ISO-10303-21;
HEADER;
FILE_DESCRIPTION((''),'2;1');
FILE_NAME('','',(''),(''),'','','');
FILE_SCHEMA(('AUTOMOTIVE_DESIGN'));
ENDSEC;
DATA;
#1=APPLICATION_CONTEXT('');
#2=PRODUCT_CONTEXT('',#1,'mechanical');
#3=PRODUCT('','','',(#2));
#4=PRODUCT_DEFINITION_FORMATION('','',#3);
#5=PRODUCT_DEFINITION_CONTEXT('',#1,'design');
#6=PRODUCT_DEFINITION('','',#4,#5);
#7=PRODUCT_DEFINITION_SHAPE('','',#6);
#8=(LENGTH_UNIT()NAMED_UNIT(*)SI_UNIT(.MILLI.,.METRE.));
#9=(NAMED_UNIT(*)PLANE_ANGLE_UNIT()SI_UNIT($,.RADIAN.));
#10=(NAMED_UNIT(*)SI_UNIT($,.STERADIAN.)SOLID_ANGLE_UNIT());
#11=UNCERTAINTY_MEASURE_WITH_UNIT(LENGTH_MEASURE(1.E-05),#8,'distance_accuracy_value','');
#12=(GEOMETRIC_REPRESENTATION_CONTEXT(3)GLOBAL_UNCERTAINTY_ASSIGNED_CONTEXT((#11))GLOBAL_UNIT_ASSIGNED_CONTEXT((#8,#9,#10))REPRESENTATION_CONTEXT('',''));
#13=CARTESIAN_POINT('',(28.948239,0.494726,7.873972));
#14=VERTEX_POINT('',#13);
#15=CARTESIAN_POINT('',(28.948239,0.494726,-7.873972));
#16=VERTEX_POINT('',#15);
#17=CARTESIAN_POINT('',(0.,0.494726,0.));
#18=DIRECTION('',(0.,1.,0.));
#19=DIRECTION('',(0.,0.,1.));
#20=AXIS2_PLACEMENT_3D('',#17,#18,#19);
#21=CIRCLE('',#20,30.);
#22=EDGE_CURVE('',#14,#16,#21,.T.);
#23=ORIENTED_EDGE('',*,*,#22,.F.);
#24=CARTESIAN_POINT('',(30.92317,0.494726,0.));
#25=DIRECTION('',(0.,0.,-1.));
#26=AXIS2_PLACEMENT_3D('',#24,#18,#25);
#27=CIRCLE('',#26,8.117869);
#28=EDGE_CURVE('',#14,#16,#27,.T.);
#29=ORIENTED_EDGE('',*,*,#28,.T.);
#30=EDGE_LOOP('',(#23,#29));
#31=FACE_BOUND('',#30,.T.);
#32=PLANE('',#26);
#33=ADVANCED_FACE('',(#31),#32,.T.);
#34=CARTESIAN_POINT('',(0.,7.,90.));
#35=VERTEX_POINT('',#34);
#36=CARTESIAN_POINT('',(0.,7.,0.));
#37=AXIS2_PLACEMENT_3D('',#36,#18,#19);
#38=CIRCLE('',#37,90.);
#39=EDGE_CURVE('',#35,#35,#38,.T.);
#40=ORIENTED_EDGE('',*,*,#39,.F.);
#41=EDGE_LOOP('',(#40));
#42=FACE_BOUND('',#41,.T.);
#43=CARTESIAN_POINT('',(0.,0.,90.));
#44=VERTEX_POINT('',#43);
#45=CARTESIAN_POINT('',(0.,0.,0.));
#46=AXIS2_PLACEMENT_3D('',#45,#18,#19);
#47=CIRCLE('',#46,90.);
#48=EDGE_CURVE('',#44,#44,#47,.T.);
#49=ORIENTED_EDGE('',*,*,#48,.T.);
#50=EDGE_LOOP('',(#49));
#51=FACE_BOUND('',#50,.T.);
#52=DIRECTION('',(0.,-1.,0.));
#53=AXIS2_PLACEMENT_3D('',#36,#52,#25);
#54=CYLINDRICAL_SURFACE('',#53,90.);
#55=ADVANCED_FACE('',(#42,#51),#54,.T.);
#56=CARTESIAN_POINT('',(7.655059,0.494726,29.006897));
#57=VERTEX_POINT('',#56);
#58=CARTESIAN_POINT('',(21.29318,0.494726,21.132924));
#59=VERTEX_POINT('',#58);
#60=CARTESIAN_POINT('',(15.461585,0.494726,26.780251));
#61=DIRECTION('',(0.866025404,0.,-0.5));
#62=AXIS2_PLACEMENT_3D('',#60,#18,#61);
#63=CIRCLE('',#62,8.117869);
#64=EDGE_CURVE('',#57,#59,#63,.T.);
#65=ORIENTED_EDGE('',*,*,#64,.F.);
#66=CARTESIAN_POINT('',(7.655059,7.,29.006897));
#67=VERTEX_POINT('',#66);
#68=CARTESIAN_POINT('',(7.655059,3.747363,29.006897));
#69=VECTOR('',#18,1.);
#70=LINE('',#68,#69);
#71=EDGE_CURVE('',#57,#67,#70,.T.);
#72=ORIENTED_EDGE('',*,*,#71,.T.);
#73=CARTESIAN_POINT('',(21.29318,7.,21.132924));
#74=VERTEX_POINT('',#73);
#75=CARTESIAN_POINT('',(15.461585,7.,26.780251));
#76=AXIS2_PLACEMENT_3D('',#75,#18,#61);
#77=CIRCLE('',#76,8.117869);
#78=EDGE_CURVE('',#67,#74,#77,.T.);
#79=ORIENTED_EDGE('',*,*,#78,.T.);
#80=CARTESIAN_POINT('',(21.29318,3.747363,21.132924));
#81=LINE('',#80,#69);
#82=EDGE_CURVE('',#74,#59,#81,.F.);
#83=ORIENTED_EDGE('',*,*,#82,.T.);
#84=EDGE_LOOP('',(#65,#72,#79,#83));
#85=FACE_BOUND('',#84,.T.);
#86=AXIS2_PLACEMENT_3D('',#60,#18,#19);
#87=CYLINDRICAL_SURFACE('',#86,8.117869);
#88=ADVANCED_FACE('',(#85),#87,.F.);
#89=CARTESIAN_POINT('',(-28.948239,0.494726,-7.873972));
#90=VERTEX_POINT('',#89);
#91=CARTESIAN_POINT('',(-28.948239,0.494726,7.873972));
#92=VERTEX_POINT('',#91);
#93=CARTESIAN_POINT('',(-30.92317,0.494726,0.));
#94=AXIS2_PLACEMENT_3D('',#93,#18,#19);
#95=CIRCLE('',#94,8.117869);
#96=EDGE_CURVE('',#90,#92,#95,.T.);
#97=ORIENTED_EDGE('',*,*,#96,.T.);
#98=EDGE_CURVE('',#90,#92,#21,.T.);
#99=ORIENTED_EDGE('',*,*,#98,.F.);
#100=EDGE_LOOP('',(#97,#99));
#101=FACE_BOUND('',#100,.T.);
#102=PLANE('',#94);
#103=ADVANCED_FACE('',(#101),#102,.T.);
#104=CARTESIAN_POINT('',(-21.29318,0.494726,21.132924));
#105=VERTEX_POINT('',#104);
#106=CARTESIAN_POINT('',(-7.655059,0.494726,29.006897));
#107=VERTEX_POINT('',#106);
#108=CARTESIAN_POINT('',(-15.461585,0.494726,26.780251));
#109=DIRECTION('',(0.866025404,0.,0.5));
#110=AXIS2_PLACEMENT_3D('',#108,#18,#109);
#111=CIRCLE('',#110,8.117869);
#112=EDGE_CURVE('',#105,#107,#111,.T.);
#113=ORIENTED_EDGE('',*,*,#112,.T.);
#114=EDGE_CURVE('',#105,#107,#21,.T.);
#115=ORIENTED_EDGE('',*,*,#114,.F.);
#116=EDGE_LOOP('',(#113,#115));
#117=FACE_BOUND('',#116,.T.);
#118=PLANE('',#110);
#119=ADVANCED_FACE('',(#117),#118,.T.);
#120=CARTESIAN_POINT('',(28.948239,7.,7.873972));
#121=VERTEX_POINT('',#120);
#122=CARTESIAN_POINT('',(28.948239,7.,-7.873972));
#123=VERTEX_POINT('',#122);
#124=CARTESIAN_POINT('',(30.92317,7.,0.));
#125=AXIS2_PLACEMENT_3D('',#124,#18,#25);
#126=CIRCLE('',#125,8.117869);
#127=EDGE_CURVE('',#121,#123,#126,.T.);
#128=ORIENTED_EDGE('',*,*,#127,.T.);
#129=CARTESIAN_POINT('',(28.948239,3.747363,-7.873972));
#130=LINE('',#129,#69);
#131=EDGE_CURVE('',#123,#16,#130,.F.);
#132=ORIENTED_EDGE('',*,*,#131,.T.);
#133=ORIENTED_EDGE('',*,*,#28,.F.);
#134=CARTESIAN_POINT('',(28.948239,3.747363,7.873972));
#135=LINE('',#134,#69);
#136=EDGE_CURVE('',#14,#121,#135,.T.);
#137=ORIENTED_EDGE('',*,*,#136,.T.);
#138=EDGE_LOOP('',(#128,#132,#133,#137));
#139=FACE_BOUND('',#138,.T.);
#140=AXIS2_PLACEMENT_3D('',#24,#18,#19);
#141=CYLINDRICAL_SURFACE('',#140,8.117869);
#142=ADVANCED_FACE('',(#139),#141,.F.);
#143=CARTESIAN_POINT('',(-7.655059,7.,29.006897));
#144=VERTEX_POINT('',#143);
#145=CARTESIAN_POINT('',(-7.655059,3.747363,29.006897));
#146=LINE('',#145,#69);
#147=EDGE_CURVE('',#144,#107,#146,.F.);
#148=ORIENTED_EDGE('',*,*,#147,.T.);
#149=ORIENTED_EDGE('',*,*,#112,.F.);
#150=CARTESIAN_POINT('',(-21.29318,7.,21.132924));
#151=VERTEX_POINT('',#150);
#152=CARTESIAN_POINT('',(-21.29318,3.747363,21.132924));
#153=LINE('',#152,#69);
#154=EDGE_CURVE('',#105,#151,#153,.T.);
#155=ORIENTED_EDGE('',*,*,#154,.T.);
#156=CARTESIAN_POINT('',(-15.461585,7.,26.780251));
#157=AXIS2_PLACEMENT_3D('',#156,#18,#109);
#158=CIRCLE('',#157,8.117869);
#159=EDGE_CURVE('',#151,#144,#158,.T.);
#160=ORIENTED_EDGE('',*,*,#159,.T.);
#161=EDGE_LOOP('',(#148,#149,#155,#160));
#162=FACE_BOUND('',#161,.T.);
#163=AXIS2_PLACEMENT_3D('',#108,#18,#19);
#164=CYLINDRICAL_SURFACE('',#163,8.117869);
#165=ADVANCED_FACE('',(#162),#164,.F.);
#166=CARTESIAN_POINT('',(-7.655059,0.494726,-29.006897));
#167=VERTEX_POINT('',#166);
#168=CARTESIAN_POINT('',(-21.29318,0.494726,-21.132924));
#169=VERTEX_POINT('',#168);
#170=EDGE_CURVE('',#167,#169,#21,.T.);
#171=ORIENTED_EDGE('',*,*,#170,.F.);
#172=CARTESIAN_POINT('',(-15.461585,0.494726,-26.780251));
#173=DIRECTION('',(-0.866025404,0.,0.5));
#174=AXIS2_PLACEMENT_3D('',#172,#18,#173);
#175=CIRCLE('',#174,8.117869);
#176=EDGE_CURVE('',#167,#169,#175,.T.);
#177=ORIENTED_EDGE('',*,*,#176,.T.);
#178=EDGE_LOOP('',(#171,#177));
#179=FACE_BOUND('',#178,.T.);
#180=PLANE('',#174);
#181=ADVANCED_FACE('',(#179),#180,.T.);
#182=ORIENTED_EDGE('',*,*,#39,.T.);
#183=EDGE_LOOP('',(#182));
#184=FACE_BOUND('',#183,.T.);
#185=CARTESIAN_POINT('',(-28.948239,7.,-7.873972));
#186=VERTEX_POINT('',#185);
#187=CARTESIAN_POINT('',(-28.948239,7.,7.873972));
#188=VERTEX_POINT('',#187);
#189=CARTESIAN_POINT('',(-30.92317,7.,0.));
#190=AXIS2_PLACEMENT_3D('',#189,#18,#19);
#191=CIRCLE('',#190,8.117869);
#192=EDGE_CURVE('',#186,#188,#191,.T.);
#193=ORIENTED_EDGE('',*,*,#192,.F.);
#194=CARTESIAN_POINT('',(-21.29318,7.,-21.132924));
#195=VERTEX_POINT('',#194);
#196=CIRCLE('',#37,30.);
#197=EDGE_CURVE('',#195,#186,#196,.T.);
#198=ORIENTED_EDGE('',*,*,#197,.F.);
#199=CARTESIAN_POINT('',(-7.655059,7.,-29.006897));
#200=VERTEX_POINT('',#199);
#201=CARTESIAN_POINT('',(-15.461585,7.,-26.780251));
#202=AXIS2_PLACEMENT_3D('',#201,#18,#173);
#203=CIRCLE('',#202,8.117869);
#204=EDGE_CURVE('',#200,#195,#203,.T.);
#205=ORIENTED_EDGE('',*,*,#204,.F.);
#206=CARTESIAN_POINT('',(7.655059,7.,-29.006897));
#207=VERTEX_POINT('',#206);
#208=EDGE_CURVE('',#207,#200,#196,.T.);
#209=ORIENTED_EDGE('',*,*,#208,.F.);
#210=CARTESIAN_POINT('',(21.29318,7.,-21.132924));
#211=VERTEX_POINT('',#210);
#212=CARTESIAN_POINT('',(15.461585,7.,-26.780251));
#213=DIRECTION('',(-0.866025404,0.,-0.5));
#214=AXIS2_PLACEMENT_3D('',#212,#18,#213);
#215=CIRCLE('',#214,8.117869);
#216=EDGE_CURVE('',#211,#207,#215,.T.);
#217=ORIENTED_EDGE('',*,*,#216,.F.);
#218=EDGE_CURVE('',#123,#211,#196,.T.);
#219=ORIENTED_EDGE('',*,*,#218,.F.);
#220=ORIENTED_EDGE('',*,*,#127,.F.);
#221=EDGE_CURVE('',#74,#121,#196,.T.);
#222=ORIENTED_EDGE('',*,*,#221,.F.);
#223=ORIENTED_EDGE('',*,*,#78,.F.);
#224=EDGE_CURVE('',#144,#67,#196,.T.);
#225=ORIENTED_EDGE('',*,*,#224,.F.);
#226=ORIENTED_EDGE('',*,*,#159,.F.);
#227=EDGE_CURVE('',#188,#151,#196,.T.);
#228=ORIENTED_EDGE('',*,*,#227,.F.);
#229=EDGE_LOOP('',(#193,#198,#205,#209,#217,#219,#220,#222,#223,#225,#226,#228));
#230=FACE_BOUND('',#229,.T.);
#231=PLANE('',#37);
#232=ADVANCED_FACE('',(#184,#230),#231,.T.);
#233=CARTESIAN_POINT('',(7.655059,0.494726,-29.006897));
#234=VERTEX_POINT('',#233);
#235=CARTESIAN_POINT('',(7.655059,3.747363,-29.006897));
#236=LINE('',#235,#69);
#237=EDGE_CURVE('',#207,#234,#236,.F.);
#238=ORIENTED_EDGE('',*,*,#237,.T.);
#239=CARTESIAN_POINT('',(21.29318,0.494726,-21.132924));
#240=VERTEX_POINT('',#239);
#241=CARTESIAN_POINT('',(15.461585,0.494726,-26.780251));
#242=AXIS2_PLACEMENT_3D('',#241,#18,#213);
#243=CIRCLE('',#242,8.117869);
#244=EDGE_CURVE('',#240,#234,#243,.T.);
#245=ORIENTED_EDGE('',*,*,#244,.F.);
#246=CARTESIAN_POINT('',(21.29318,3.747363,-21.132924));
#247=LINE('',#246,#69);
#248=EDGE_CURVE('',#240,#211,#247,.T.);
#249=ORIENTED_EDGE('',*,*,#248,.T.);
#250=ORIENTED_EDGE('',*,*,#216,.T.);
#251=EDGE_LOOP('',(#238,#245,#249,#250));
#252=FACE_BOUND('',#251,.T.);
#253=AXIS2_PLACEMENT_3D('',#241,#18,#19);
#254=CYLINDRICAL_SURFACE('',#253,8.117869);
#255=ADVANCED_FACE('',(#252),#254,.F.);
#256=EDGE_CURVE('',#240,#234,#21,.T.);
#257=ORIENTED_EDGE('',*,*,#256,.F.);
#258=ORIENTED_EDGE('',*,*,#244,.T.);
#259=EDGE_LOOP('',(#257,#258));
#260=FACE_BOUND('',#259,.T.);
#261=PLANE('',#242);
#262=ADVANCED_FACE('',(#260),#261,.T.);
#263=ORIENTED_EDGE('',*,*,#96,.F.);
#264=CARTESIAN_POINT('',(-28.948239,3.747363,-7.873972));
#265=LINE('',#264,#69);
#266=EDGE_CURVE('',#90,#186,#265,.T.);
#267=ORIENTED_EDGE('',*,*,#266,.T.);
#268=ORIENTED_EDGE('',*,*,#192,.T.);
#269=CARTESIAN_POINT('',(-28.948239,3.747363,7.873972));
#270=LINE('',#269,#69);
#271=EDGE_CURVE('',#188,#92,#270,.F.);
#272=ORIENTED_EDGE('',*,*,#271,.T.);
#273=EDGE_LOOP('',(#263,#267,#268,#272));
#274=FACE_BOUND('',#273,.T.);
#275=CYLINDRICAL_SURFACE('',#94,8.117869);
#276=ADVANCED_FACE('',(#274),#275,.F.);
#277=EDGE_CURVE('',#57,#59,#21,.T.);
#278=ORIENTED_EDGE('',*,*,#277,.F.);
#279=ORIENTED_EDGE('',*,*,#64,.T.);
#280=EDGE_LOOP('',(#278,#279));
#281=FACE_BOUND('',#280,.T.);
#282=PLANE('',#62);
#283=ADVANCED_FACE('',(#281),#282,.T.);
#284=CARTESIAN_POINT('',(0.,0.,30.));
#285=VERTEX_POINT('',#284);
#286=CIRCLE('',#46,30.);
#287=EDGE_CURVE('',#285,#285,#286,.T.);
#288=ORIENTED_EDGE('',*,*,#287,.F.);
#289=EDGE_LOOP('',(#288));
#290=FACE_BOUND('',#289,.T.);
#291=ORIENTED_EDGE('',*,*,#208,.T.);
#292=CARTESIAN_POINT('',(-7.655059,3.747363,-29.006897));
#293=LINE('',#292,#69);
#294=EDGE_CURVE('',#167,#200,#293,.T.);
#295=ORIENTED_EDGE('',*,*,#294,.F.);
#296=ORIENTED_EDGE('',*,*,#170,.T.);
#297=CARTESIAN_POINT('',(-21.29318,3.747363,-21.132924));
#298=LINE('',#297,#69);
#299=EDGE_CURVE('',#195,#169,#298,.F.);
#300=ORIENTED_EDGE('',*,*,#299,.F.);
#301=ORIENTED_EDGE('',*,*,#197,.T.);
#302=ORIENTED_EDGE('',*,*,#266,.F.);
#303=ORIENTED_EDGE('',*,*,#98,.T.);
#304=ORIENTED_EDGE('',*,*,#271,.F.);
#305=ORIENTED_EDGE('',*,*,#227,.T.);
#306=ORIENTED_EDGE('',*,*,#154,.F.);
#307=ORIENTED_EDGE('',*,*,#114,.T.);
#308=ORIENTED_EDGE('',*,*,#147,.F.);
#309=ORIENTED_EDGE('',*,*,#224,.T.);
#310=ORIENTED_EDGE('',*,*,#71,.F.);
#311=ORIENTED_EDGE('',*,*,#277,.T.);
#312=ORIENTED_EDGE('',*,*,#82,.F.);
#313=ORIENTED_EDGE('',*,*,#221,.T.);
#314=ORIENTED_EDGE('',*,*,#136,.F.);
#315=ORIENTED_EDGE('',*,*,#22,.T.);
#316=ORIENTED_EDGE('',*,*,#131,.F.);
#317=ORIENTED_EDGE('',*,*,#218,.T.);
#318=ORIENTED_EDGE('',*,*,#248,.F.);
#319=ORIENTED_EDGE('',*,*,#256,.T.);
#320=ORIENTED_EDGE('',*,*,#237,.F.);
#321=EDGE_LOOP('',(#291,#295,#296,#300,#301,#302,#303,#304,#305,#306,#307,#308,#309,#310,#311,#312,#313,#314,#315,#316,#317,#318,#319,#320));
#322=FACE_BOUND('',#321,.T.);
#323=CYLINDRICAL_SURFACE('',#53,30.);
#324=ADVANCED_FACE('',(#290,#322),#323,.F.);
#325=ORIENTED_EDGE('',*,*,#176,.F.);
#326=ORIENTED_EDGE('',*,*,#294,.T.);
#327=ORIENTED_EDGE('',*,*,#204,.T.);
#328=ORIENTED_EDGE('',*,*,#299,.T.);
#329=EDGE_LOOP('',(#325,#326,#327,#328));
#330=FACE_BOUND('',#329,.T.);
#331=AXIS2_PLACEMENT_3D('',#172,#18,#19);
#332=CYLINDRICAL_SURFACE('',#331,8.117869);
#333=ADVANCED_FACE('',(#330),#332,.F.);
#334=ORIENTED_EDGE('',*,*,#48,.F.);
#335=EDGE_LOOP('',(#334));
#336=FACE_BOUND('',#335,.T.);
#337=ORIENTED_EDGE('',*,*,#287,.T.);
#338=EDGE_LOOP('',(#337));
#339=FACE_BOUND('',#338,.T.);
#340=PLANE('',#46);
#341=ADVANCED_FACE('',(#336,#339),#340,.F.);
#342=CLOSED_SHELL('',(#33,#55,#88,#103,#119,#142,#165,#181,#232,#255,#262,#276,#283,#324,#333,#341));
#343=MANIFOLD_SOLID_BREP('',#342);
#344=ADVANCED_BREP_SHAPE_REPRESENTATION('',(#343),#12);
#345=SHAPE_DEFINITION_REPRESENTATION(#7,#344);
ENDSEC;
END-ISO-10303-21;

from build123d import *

# Parameters (mm, degrees)
SKETCH1_R           = 90
BOSS_EXTRUDE1_DEPTH = 7
SKETCH2_R           = 30
CUT_EXTRUDE1_DEPTH  = 128.471565457
SKETCH3_R           = 8.117868842
CUT_EXTRUDE2_DEPTH  = 6.505273873
CIRPATTERN1_COUNT   = 6


with BuildPart() as part:
    # Sketch1 → Boss-Extrude1 (new body)
    with BuildSketch(Plane(origin=(0, 0, 0), x_dir=(1, 0, 0), z_dir=(0, 1, 0))):
        Circle(SKETCH1_R)
    extrude(amount=BOSS_EXTRUDE1_DEPTH)

    # Sketch2 → Cut-Extrude1 (cut, through all)
    with BuildSketch(Plane(origin=(0, 0, 0), x_dir=(1, 0, 0), z_dir=(0, 1, 0))):
        Circle(SKETCH2_R)
    extrude(amount=CUT_EXTRUDE1_DEPTH, mode=Mode.SUBTRACT)

    # Sketch3 → Cut-Extrude2 (cut)
    with BuildSketch(Plane(origin=(0, 7, 0), x_dir=(1, 0, 0), z_dir=(0, 1, 0))):
        with Locations((-30.923170161, 0)):
            Circle(SKETCH3_R)
    cut_extrude2 = extrude(amount=-CUT_EXTRUDE2_DEPTH, mode=Mode.SUBTRACT)

    # CirPattern1: Cut-Extrude2 ×6 about axis
    cirpattern1_axis = Axis((0, 0, 0), (0, 1, 0))
    for i in range(1, CIRPATTERN1_COUNT):
        add(cut_extrude2.rotate(cirpattern1_axis, i * 360 / CIRPATTERN1_COUNT), mode=Mode.SUBTRACT)


solid = part.part
